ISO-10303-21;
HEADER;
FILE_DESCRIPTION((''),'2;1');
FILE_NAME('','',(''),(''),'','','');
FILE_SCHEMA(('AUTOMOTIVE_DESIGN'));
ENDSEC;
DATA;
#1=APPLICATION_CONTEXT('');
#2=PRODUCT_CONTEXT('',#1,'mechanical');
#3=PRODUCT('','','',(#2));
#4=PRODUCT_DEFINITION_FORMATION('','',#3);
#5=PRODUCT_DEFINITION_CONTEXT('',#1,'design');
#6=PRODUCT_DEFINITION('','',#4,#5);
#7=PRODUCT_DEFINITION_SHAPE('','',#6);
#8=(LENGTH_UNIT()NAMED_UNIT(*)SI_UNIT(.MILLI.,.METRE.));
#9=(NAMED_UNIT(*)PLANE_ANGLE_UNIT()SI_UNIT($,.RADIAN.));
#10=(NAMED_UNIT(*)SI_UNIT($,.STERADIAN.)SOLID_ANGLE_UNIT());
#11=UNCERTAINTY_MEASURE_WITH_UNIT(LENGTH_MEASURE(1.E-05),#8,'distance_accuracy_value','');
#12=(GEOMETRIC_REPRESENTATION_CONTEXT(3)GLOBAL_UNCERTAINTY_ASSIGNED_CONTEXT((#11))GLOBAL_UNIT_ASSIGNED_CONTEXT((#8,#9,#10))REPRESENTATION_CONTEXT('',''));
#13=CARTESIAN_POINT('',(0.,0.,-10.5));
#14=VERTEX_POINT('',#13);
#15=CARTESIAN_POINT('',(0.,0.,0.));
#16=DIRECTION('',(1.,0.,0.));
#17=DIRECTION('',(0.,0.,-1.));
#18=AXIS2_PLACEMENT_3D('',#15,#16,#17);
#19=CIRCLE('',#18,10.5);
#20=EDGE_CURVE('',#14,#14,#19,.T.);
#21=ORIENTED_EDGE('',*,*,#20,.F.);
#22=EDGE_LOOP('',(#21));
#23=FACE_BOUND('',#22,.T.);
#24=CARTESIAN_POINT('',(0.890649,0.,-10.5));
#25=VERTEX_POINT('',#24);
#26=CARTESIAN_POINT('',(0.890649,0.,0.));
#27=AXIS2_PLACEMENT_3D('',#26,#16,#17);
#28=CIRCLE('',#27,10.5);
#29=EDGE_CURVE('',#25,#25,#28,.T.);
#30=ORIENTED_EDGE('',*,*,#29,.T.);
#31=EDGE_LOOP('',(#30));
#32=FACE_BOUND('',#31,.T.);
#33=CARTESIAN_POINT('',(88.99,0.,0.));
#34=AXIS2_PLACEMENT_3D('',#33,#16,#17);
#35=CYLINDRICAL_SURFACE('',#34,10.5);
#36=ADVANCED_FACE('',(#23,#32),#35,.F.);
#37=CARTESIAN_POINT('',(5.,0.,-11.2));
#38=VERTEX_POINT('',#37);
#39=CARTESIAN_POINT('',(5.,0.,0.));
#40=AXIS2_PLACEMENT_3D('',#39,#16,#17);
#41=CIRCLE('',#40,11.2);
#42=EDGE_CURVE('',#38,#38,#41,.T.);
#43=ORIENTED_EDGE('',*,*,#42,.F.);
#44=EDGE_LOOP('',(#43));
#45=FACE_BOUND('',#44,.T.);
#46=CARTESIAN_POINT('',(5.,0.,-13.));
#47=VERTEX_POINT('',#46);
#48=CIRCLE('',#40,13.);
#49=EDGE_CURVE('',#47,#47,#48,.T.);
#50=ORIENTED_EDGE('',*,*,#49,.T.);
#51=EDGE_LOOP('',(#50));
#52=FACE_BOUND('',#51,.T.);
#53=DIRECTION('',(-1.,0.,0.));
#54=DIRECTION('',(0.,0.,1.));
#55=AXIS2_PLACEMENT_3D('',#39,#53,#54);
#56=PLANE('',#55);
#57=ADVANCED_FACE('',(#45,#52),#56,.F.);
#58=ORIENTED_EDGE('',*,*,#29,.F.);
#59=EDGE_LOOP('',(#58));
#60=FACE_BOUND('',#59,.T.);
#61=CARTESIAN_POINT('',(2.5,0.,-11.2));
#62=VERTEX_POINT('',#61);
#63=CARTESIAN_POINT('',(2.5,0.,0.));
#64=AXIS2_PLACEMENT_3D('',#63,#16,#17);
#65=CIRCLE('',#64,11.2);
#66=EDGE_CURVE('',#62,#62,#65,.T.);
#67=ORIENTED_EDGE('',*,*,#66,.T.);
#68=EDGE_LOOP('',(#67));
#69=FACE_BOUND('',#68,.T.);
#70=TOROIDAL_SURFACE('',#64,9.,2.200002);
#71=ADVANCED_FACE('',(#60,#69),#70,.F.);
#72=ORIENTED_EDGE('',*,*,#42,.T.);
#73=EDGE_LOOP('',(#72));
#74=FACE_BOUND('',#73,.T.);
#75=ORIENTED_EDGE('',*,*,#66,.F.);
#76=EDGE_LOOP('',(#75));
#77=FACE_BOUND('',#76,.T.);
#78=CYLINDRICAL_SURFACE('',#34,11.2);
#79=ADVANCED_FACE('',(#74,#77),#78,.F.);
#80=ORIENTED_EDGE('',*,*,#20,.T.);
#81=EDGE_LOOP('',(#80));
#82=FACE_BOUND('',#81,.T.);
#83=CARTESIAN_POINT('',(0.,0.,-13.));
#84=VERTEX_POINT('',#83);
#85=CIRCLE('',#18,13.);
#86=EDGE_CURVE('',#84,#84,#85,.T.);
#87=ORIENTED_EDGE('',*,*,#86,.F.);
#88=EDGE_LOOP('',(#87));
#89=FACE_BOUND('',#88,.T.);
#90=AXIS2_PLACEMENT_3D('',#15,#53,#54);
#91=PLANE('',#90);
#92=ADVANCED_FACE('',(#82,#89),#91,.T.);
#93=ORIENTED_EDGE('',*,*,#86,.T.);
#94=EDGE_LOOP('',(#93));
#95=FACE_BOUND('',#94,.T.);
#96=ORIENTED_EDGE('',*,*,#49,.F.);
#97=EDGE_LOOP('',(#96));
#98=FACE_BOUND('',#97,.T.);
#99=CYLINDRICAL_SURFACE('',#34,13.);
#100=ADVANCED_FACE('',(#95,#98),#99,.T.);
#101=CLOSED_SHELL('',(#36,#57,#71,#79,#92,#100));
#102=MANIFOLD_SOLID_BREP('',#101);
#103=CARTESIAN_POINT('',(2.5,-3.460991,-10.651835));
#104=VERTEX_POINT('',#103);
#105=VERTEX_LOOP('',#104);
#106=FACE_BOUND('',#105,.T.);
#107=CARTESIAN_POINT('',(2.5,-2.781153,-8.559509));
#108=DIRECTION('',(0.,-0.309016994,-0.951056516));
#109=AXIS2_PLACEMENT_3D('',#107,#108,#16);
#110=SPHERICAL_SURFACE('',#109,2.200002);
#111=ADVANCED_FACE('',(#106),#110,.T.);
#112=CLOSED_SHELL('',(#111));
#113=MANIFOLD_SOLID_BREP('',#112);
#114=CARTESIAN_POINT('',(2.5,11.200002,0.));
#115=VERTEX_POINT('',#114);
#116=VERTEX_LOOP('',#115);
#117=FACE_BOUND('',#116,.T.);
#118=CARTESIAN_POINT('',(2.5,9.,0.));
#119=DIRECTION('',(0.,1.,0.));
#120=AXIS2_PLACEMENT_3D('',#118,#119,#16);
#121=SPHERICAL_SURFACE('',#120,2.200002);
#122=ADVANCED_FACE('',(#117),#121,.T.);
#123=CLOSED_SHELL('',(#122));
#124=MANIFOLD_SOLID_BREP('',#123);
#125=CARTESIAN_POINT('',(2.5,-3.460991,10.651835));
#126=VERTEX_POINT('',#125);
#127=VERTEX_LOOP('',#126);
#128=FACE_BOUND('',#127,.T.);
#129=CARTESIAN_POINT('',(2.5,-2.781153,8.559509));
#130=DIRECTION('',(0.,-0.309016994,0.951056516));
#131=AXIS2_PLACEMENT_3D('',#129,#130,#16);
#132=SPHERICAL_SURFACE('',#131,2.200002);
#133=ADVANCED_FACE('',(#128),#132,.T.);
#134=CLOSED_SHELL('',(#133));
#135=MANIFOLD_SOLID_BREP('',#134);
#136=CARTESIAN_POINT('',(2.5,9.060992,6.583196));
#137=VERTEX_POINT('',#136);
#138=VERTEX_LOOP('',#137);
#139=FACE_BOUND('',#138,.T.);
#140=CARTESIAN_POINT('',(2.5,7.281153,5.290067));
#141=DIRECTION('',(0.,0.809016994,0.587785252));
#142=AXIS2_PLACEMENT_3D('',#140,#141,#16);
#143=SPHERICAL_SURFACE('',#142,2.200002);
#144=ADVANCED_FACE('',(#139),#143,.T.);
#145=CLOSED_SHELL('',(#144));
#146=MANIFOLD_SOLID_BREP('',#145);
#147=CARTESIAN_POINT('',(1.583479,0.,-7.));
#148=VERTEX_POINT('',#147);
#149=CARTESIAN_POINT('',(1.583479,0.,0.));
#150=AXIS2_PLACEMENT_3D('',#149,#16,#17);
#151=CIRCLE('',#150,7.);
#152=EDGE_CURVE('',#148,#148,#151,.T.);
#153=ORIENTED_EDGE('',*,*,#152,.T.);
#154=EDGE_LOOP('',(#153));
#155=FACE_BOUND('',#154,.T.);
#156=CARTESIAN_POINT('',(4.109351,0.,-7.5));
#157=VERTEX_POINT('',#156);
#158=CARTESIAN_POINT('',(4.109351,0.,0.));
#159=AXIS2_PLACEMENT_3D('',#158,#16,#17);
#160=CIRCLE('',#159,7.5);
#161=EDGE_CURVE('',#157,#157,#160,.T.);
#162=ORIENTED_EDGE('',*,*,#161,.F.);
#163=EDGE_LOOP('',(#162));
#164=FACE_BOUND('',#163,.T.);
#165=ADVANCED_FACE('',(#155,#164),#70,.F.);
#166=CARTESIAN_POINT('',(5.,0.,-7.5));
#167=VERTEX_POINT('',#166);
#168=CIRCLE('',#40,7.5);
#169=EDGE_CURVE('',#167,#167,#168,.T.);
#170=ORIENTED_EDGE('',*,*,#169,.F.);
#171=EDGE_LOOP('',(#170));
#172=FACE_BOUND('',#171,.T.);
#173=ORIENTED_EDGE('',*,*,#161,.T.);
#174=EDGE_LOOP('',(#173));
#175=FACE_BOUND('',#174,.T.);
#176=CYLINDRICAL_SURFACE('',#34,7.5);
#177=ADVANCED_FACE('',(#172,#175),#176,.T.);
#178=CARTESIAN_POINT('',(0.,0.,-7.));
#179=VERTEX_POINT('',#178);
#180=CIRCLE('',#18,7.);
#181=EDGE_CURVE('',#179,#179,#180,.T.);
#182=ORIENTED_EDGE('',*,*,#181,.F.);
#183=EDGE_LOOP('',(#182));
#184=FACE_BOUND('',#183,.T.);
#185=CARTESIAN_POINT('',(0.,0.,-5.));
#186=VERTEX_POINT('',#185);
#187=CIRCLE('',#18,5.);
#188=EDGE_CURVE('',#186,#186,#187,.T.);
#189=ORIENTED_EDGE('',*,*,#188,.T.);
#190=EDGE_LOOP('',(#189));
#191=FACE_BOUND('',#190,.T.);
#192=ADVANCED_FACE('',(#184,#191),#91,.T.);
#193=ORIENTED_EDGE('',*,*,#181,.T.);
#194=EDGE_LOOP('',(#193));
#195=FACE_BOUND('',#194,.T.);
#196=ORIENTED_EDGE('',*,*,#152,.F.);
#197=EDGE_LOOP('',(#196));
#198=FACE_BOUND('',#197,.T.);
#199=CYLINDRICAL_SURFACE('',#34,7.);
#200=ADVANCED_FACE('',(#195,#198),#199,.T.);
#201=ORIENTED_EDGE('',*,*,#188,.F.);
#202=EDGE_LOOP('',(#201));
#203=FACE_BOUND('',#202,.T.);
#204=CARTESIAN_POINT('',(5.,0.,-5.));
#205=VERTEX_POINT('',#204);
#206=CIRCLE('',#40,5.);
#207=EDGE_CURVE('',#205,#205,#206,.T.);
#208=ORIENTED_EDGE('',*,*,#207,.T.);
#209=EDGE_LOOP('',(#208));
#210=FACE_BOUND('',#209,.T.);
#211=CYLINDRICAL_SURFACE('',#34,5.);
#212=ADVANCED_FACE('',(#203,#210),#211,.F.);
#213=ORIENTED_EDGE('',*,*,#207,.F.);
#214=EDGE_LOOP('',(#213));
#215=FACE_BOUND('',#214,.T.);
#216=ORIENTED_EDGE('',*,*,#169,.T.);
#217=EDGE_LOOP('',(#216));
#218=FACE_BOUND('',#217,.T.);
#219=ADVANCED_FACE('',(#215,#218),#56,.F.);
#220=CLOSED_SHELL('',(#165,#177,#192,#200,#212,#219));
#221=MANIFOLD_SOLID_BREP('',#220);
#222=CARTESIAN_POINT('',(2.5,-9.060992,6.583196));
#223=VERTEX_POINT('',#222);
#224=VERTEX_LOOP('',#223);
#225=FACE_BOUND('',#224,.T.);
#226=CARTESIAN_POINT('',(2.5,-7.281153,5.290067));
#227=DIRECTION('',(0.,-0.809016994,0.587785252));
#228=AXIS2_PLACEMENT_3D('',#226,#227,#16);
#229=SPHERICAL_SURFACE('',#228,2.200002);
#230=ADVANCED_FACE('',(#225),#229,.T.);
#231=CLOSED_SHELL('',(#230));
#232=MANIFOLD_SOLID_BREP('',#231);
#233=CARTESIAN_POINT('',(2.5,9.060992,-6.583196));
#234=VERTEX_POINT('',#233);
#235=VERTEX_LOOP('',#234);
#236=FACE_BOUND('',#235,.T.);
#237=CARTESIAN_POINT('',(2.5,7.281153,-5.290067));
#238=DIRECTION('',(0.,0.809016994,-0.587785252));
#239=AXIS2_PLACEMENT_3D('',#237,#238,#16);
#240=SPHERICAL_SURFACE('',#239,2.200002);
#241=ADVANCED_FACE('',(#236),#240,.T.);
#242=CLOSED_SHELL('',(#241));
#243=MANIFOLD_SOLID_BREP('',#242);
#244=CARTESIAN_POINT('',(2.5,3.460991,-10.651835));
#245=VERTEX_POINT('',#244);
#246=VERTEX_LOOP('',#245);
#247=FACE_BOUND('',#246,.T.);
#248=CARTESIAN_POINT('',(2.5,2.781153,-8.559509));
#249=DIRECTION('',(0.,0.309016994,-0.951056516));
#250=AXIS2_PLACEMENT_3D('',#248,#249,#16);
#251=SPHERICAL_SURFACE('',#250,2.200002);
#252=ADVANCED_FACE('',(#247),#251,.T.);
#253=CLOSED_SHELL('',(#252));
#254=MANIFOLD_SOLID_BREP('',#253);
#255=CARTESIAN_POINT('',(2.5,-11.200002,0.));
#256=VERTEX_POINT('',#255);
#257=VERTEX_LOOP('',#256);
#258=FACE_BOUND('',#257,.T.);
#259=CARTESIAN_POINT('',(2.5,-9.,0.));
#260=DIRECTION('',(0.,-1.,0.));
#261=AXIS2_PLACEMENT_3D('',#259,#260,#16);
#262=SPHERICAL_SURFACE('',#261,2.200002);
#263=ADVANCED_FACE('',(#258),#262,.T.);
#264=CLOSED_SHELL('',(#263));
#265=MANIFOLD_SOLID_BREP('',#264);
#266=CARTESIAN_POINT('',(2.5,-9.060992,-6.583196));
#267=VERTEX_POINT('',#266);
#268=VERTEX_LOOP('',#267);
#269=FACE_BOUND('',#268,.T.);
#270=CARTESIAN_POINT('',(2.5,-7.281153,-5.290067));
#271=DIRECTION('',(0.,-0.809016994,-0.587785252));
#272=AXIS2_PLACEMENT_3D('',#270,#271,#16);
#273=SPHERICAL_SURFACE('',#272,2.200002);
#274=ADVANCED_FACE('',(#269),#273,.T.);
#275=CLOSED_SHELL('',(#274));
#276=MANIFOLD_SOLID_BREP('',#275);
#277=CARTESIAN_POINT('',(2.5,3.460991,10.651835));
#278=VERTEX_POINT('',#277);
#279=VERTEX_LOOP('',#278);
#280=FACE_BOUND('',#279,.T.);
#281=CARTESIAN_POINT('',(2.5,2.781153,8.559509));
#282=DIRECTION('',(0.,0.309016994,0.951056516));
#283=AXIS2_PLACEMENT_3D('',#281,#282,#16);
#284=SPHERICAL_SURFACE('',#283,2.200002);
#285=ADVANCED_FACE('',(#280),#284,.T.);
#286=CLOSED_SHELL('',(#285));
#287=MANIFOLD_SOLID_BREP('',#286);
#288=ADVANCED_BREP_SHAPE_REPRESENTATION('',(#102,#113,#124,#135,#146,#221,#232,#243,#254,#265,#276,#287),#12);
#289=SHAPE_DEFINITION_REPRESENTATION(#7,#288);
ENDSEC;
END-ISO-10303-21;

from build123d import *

# Parameters (mm, degrees)
CIRPATTERN2_COUNT = 10


# Read off the part's stored shape, not the designer's step: Revolve1
with BuildPart() as part:
    # Revolve1 outline → Revolve1 (revolve)
    with BuildSketch(Plane.YX):
        with BuildLine():
            Line((7.5, 4.109350958), (7.5, 5))
            Line((7.5, 5), (5, 5))
            Line((5, 5), (5, 0))
            Line((5, 0), (7, 0))
            Line((7, 0), (7, 1.583479129))
            ThreePointArc((7, 1.583479129), (6.841874164, 2.927204146), (7.5, 4.109350958))
        make_face()
        with BuildLine():
            Line((10.5, 0.890649042), (10.5, 0))
            Line((10.5, 0), (13, 0))
            Line((13, 0), (13, 5))
            Line((13, 5), (11.2, 5))
            Line((11.2, 5), (11.200002388, 2.5))
            ThreePointArc((11.200002388, 2.5), (11.017425846, 1.622501588), (10.5, 0.890649042))
        make_face()
    revolve(axis=Axis((0, 0, 0), (1, 0, 0)))


with BuildPart() as body_2:
    # Sketch1<3> one side → Revolve2 (revolve)
    with BuildSketch(Plane.XY):
        with BuildLine():
            ThreePointArc((2.5, 6.799997612), (4.055636607, 7.444363393), (4.700002388, 9))
            ThreePointArc((4.700002388, 9), (4.055636607, 10.555636607), (2.5, 11.200002388))
            Line((2.5, 11.200002388), (2.5, 6.799997612))
        make_face()
    revolve(axis=Axis((2.5, 13, 0), (0, -1, 0)))


with BuildPart() as cirpattern2_1:
    # CirPattern2: pattern copy
    add(body_2.part.rotate(Axis((0, 0, 0), (1, 0, 0)), 1 * 360 / CIRPATTERN2_COUNT))


with BuildPart() as cirpattern2_2:
    # CirPattern2: pattern copy
    add(body_2.part.rotate(Axis((0, 0, 0), (1, 0, 0)), 2 * 360 / CIRPATTERN2_COUNT))


with BuildPart() as cirpattern2_3:
    # CirPattern2: pattern copy
    add(body_2.part.rotate(Axis((0, 0, 0), (1, 0, 0)), 3 * 360 / CIRPATTERN2_COUNT))


with BuildPart() as cirpattern2_4:
    # CirPattern2: pattern copy
    add(body_2.part.rotate(Axis((0, 0, 0), (1, 0, 0)), 4 * 360 / CIRPATTERN2_COUNT))


with BuildPart() as cirpattern2_5:
    # CirPattern2: pattern copy
    add(body_2.part.rotate(Axis((0, 0, 0), (1, 0, 0)), 5 * 360 / CIRPATTERN2_COUNT))


with BuildPart() as cirpattern2_6:
    # CirPattern2: pattern copy
    add(body_2.part.rotate(Axis((0, 0, 0), (1, 0, 0)), 6 * 360 / CIRPATTERN2_COUNT))


with BuildPart() as cirpattern2_7:
    # CirPattern2: pattern copy
    add(body_2.part.rotate(Axis((0, 0, 0), (1, 0, 0)), 7 * 360 / CIRPATTERN2_COUNT))


with BuildPart() as cirpattern2_8:
    # CirPattern2: pattern copy
    add(body_2.part.rotate(Axis((0, 0, 0), (1, 0, 0)), 8 * 360 / CIRPATTERN2_COUNT))


with BuildPart() as cirpattern2_9:
    # CirPattern2: pattern copy
    add(body_2.part.rotate(Axis((0, 0, 0), (1, 0, 0)), 9 * 360 / CIRPATTERN2_COUNT))


solid = Compound([part.part, body_2.part, cirpattern2_1.part, cirpattern2_2.part, cirpattern2_3.part, cirpattern2_4.part, cirpattern2_5.part, cirpattern2_6.part, cirpattern2_7.part, cirpattern2_8.part, cirpattern2_9.part])
